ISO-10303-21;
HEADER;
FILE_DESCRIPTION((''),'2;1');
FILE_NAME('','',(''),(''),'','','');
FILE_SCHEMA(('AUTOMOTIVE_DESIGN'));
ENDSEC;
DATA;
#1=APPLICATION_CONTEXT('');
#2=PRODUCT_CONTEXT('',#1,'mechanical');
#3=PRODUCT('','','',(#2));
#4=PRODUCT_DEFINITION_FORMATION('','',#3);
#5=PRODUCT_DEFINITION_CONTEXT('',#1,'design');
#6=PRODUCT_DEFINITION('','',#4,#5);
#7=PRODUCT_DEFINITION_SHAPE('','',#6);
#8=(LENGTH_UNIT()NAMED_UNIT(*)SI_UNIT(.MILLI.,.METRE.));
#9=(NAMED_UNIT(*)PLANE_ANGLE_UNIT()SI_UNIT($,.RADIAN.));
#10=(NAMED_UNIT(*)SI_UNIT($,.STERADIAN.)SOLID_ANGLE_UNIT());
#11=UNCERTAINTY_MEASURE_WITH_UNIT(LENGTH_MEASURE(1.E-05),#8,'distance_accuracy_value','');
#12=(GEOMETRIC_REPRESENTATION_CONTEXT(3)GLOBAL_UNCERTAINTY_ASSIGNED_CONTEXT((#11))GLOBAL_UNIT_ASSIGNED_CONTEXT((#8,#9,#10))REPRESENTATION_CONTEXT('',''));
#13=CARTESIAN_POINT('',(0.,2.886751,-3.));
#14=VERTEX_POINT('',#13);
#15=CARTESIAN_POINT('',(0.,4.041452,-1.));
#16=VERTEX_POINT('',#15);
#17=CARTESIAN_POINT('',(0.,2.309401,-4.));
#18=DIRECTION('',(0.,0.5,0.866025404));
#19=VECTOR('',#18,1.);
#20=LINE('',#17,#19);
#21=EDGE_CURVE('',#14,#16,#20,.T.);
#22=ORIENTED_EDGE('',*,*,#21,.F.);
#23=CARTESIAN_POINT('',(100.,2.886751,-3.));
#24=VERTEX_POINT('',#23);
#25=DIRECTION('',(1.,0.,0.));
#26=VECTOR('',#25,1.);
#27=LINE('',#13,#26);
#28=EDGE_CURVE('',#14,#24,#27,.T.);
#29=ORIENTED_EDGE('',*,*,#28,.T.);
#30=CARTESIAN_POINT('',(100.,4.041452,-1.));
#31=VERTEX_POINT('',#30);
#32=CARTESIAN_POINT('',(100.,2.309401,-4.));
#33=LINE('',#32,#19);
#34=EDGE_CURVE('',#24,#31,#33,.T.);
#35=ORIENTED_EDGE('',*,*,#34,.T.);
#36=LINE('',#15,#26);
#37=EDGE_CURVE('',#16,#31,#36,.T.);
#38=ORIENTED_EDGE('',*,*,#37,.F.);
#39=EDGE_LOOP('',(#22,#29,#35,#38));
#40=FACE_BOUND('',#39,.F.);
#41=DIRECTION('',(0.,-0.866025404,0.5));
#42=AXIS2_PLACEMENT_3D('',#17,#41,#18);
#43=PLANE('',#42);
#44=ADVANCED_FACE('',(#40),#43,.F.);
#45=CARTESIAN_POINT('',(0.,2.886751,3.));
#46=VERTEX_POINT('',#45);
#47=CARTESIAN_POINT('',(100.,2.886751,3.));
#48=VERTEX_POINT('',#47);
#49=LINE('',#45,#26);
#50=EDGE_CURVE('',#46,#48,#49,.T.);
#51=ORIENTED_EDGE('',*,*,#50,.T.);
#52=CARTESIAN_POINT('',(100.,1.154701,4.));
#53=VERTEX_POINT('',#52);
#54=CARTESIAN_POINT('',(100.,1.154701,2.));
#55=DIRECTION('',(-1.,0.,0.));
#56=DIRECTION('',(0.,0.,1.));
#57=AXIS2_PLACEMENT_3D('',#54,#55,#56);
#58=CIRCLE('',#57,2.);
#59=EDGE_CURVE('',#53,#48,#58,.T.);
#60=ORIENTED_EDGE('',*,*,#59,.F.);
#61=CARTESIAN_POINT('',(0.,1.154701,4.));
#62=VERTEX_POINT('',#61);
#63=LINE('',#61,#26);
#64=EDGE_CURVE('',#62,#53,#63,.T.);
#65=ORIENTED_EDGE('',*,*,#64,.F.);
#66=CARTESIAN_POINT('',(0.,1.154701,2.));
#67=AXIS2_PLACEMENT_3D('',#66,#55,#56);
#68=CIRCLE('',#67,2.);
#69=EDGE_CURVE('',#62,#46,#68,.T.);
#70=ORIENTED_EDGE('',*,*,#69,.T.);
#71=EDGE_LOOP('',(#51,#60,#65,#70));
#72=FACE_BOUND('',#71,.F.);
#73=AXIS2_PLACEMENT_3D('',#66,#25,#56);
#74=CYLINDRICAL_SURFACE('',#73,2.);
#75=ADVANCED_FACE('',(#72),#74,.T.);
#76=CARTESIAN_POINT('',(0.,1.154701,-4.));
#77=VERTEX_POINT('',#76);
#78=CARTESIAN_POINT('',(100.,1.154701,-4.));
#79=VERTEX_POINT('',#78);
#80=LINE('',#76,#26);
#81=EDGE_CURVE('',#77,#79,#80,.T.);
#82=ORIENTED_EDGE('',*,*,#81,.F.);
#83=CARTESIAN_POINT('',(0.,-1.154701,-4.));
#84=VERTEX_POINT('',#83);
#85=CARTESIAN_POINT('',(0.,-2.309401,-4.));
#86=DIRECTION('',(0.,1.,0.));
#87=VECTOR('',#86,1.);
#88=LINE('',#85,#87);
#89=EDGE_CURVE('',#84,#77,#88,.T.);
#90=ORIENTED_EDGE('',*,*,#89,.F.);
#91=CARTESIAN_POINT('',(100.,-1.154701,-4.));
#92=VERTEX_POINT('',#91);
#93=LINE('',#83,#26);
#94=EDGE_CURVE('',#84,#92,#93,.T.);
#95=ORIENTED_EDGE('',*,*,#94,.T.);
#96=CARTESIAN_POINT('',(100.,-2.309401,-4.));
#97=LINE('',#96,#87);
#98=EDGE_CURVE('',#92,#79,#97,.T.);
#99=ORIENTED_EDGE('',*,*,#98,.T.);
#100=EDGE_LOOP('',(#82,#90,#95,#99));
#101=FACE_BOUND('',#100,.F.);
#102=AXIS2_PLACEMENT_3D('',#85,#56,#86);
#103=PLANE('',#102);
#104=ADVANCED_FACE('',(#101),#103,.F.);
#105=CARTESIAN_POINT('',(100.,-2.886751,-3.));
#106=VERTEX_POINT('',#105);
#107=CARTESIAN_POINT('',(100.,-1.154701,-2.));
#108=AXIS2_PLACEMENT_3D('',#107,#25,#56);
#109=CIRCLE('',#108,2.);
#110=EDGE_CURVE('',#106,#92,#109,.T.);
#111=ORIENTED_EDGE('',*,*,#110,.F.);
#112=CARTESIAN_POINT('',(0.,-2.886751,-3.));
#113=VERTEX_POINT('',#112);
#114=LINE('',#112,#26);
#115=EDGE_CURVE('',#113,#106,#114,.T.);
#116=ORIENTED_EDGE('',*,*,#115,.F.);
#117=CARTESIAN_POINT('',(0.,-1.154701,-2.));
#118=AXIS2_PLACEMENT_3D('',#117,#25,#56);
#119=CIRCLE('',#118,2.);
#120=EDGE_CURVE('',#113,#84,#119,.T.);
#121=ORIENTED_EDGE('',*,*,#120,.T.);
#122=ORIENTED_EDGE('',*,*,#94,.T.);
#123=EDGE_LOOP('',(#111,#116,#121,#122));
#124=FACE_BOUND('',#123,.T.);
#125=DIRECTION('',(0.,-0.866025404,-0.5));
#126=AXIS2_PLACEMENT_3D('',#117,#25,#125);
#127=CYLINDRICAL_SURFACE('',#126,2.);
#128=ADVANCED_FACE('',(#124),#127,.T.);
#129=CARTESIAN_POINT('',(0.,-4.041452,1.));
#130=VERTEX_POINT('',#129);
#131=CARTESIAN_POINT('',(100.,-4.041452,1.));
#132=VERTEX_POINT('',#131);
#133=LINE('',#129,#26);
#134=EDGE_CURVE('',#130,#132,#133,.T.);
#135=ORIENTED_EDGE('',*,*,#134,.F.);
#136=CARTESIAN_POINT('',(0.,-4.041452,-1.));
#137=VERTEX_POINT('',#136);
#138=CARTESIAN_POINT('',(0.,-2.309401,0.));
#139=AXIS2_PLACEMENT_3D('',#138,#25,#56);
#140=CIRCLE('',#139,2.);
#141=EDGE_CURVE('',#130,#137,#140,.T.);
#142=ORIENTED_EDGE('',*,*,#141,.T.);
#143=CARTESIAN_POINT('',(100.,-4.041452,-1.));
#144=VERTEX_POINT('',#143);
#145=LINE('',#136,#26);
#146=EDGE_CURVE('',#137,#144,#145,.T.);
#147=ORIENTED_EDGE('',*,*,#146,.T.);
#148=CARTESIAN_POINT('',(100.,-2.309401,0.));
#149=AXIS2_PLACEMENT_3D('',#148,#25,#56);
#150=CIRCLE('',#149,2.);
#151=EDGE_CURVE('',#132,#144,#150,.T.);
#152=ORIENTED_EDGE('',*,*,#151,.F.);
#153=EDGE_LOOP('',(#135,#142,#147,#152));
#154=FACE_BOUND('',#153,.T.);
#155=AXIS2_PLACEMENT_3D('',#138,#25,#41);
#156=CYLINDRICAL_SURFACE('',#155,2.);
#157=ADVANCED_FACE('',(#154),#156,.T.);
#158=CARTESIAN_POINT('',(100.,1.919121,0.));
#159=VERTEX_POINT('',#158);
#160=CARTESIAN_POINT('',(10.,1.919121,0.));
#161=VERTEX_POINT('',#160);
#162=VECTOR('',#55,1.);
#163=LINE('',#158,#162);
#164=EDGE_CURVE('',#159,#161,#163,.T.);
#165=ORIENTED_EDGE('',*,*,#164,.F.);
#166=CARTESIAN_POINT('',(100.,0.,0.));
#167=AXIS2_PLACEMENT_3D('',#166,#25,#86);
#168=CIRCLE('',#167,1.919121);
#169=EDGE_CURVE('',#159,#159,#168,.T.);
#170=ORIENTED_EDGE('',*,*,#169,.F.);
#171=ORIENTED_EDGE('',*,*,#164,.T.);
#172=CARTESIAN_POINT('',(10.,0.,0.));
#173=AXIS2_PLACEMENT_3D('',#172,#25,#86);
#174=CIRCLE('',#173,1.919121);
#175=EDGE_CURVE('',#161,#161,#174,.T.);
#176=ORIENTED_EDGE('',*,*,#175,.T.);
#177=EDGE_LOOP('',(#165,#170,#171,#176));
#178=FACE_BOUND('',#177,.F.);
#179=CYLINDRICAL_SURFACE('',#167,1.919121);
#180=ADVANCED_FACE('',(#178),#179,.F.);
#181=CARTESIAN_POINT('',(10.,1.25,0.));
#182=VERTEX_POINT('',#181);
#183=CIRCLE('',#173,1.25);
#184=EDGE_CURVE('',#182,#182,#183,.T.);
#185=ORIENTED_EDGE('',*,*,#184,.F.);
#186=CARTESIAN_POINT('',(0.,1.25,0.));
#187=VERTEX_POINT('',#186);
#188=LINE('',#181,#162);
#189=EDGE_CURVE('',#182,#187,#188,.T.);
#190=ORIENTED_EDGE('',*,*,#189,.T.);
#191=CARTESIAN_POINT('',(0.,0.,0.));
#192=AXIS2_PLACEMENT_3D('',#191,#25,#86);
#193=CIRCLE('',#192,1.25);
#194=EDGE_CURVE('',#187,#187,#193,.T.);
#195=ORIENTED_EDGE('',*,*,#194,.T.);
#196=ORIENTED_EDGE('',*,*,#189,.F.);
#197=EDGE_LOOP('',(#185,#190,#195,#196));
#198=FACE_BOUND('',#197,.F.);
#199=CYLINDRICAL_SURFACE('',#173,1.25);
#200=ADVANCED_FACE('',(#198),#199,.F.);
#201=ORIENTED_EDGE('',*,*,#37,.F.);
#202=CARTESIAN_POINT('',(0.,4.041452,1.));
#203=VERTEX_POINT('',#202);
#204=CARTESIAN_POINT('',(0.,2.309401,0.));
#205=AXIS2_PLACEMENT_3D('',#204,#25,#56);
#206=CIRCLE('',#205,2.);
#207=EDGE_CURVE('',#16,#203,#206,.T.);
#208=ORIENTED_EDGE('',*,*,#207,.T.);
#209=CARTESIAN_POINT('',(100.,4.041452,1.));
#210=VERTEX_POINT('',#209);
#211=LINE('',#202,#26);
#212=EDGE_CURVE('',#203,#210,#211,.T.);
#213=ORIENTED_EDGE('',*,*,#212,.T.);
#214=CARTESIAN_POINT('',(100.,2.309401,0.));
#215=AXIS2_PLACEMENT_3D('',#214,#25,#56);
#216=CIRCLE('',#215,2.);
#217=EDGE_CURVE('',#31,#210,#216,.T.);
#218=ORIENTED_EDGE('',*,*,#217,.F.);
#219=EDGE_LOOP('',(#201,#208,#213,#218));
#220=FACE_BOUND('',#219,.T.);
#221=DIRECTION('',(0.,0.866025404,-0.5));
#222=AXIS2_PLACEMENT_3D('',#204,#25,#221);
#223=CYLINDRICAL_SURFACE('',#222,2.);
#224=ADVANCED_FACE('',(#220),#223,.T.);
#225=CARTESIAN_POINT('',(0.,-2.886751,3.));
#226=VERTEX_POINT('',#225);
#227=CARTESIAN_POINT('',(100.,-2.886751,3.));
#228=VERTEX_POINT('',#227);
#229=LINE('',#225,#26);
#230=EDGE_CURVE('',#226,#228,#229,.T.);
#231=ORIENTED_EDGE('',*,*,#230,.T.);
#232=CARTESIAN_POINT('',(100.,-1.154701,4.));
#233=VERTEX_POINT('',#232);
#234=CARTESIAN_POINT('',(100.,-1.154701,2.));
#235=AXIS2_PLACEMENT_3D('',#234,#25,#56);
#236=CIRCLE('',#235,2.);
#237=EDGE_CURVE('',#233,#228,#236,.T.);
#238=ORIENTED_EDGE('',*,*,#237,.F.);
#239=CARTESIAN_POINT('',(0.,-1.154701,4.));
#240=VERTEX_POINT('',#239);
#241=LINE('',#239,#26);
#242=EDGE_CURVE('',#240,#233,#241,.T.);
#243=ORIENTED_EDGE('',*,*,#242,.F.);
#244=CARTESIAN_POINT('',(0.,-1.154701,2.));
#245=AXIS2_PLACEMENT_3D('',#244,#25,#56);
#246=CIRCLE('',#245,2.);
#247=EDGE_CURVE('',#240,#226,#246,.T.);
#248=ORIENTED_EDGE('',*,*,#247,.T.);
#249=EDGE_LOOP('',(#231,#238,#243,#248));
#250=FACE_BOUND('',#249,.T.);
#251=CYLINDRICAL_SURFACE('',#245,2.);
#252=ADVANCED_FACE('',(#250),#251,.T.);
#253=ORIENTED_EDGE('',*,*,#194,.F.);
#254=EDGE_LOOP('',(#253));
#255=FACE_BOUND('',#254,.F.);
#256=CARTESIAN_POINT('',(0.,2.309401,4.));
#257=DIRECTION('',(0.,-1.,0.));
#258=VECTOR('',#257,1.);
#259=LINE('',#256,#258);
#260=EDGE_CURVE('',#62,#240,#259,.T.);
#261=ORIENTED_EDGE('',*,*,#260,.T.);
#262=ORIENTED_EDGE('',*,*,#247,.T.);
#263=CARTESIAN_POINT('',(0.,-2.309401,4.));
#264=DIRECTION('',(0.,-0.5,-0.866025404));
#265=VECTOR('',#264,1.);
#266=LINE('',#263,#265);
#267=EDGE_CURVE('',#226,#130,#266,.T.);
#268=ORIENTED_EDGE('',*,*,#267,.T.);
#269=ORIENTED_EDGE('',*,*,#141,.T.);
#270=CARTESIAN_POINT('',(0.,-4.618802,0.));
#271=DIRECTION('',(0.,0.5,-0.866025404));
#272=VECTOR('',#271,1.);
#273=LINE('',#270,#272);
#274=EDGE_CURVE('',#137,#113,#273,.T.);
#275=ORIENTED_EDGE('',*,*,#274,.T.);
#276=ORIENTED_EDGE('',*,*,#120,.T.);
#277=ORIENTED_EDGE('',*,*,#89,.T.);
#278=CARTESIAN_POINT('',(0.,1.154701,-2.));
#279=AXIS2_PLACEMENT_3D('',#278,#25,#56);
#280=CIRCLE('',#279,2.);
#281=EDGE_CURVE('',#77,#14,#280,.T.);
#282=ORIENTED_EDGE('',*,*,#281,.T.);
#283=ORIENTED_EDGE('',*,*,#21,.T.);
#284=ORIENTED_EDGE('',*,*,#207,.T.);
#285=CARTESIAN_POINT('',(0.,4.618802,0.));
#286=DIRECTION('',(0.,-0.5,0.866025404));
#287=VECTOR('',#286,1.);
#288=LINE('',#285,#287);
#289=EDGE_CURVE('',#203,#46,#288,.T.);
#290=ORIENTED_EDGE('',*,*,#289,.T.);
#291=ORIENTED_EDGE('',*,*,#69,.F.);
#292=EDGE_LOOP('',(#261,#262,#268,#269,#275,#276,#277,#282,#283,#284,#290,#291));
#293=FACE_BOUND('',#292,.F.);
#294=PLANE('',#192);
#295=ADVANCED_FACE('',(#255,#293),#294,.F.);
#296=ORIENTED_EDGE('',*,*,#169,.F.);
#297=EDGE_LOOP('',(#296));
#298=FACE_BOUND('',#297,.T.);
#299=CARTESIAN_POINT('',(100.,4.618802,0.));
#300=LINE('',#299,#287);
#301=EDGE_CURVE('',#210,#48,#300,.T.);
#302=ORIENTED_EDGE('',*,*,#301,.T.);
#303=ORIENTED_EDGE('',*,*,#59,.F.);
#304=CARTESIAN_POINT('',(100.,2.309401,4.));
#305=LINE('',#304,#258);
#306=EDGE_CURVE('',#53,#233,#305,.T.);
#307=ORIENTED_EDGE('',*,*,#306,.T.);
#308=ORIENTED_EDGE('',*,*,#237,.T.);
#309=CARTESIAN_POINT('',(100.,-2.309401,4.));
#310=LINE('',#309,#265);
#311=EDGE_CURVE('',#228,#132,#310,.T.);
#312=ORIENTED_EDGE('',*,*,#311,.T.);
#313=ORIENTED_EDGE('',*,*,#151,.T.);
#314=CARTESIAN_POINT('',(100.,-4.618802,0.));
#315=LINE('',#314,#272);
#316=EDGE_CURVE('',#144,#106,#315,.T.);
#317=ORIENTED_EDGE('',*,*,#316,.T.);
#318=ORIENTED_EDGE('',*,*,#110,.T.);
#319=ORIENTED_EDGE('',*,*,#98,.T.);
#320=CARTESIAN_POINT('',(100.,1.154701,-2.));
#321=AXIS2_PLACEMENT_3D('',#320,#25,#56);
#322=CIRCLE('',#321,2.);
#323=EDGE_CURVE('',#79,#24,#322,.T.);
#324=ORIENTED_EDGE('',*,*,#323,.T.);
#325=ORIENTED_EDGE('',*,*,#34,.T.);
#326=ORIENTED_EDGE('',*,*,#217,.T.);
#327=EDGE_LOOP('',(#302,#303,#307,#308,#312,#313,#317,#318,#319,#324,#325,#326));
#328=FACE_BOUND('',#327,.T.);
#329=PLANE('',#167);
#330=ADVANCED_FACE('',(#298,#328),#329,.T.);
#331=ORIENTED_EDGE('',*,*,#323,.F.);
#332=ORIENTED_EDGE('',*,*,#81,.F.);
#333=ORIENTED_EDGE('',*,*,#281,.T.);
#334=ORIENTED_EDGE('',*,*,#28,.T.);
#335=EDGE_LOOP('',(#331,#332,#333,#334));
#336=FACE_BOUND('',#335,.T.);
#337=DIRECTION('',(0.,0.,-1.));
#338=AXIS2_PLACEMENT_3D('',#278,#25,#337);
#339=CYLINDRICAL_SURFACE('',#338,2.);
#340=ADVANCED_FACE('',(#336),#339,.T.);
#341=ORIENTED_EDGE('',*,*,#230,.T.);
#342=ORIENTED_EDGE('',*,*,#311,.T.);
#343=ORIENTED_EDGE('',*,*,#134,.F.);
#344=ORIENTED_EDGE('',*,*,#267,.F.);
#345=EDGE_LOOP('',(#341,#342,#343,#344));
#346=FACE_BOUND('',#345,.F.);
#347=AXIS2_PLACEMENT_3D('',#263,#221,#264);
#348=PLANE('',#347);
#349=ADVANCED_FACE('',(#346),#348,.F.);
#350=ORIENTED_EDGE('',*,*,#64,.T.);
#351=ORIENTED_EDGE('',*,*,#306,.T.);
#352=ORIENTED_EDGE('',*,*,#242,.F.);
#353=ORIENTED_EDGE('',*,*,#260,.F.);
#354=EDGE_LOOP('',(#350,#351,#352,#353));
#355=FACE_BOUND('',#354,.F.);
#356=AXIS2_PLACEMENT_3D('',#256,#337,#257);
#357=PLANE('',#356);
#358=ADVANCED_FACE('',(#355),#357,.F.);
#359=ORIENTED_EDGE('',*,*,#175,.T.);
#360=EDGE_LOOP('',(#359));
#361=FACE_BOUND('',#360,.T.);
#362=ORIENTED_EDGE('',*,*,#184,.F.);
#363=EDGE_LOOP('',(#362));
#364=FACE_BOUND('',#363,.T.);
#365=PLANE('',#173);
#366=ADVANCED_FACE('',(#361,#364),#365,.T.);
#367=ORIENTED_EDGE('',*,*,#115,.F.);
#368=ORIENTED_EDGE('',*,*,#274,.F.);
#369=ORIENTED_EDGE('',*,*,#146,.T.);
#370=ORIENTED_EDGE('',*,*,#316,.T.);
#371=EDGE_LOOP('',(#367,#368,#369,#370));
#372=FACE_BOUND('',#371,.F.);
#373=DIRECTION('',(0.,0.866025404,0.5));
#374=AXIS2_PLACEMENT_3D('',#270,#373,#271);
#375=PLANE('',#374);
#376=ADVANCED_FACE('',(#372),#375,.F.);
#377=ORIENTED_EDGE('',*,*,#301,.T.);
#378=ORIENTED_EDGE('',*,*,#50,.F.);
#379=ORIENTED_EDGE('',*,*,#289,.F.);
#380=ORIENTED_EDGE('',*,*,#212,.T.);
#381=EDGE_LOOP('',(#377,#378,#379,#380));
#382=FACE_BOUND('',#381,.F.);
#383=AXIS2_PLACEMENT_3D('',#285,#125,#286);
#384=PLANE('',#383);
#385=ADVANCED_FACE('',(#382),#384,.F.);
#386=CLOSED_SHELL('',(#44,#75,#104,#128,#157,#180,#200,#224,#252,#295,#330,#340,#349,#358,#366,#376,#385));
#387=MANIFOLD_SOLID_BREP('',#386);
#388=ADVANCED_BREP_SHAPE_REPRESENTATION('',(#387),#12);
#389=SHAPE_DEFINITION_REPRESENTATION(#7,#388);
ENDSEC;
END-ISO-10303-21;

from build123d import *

# Parameters (mm, degrees)
F1_DEPTH = 100
F2_R     = 2
F3_R     = 1.9191209756
F4_DEPTH = 90
F5_R     = 1.25
F6_DEPTH = 20


# Not quite as in the source:
# - a feature names something its author has since deleted; it is built from what else it names


with BuildPart() as f1:
    # F0 (on Right) → F1 (new body)
    with BuildSketch(Plane.YZ):
        Polygon((2.3094010768, 4), (-2.3094010768, 4), (-4.6188021535, 0), (-2.3094010768, -4), (2.3094010768, -4), (4.6188021535, 0), align=None)
    extrude(amount=F1_DEPTH)

    # F2
    f2_edges = [f1.edges().sort_by_distance(p)[0] for p in [
        (50, -2.309401, 4),
        (50, -4.618802, 0),
        (50, -2.309401, -4),
        (50, 2.309401, 4),
        (50, 4.618802, 0),
        (50, 2.309401, -4),
    ]]
    fillet(f2_edges, radius=F2_R)

    # F3 (on face) → F4 (cut)
    with BuildSketch(Plane.YZ.offset(100)):
        Circle(F3_R)
    extrude(amount=-F4_DEPTH, mode=Mode.SUBTRACT)

    # F5 (on face) → F6 (cut)
    with BuildSketch(Plane.YZ.offset(10)):
        Circle(F5_R)
    extrude(amount=-F6_DEPTH, mode=Mode.SUBTRACT)


solid = f1.part
